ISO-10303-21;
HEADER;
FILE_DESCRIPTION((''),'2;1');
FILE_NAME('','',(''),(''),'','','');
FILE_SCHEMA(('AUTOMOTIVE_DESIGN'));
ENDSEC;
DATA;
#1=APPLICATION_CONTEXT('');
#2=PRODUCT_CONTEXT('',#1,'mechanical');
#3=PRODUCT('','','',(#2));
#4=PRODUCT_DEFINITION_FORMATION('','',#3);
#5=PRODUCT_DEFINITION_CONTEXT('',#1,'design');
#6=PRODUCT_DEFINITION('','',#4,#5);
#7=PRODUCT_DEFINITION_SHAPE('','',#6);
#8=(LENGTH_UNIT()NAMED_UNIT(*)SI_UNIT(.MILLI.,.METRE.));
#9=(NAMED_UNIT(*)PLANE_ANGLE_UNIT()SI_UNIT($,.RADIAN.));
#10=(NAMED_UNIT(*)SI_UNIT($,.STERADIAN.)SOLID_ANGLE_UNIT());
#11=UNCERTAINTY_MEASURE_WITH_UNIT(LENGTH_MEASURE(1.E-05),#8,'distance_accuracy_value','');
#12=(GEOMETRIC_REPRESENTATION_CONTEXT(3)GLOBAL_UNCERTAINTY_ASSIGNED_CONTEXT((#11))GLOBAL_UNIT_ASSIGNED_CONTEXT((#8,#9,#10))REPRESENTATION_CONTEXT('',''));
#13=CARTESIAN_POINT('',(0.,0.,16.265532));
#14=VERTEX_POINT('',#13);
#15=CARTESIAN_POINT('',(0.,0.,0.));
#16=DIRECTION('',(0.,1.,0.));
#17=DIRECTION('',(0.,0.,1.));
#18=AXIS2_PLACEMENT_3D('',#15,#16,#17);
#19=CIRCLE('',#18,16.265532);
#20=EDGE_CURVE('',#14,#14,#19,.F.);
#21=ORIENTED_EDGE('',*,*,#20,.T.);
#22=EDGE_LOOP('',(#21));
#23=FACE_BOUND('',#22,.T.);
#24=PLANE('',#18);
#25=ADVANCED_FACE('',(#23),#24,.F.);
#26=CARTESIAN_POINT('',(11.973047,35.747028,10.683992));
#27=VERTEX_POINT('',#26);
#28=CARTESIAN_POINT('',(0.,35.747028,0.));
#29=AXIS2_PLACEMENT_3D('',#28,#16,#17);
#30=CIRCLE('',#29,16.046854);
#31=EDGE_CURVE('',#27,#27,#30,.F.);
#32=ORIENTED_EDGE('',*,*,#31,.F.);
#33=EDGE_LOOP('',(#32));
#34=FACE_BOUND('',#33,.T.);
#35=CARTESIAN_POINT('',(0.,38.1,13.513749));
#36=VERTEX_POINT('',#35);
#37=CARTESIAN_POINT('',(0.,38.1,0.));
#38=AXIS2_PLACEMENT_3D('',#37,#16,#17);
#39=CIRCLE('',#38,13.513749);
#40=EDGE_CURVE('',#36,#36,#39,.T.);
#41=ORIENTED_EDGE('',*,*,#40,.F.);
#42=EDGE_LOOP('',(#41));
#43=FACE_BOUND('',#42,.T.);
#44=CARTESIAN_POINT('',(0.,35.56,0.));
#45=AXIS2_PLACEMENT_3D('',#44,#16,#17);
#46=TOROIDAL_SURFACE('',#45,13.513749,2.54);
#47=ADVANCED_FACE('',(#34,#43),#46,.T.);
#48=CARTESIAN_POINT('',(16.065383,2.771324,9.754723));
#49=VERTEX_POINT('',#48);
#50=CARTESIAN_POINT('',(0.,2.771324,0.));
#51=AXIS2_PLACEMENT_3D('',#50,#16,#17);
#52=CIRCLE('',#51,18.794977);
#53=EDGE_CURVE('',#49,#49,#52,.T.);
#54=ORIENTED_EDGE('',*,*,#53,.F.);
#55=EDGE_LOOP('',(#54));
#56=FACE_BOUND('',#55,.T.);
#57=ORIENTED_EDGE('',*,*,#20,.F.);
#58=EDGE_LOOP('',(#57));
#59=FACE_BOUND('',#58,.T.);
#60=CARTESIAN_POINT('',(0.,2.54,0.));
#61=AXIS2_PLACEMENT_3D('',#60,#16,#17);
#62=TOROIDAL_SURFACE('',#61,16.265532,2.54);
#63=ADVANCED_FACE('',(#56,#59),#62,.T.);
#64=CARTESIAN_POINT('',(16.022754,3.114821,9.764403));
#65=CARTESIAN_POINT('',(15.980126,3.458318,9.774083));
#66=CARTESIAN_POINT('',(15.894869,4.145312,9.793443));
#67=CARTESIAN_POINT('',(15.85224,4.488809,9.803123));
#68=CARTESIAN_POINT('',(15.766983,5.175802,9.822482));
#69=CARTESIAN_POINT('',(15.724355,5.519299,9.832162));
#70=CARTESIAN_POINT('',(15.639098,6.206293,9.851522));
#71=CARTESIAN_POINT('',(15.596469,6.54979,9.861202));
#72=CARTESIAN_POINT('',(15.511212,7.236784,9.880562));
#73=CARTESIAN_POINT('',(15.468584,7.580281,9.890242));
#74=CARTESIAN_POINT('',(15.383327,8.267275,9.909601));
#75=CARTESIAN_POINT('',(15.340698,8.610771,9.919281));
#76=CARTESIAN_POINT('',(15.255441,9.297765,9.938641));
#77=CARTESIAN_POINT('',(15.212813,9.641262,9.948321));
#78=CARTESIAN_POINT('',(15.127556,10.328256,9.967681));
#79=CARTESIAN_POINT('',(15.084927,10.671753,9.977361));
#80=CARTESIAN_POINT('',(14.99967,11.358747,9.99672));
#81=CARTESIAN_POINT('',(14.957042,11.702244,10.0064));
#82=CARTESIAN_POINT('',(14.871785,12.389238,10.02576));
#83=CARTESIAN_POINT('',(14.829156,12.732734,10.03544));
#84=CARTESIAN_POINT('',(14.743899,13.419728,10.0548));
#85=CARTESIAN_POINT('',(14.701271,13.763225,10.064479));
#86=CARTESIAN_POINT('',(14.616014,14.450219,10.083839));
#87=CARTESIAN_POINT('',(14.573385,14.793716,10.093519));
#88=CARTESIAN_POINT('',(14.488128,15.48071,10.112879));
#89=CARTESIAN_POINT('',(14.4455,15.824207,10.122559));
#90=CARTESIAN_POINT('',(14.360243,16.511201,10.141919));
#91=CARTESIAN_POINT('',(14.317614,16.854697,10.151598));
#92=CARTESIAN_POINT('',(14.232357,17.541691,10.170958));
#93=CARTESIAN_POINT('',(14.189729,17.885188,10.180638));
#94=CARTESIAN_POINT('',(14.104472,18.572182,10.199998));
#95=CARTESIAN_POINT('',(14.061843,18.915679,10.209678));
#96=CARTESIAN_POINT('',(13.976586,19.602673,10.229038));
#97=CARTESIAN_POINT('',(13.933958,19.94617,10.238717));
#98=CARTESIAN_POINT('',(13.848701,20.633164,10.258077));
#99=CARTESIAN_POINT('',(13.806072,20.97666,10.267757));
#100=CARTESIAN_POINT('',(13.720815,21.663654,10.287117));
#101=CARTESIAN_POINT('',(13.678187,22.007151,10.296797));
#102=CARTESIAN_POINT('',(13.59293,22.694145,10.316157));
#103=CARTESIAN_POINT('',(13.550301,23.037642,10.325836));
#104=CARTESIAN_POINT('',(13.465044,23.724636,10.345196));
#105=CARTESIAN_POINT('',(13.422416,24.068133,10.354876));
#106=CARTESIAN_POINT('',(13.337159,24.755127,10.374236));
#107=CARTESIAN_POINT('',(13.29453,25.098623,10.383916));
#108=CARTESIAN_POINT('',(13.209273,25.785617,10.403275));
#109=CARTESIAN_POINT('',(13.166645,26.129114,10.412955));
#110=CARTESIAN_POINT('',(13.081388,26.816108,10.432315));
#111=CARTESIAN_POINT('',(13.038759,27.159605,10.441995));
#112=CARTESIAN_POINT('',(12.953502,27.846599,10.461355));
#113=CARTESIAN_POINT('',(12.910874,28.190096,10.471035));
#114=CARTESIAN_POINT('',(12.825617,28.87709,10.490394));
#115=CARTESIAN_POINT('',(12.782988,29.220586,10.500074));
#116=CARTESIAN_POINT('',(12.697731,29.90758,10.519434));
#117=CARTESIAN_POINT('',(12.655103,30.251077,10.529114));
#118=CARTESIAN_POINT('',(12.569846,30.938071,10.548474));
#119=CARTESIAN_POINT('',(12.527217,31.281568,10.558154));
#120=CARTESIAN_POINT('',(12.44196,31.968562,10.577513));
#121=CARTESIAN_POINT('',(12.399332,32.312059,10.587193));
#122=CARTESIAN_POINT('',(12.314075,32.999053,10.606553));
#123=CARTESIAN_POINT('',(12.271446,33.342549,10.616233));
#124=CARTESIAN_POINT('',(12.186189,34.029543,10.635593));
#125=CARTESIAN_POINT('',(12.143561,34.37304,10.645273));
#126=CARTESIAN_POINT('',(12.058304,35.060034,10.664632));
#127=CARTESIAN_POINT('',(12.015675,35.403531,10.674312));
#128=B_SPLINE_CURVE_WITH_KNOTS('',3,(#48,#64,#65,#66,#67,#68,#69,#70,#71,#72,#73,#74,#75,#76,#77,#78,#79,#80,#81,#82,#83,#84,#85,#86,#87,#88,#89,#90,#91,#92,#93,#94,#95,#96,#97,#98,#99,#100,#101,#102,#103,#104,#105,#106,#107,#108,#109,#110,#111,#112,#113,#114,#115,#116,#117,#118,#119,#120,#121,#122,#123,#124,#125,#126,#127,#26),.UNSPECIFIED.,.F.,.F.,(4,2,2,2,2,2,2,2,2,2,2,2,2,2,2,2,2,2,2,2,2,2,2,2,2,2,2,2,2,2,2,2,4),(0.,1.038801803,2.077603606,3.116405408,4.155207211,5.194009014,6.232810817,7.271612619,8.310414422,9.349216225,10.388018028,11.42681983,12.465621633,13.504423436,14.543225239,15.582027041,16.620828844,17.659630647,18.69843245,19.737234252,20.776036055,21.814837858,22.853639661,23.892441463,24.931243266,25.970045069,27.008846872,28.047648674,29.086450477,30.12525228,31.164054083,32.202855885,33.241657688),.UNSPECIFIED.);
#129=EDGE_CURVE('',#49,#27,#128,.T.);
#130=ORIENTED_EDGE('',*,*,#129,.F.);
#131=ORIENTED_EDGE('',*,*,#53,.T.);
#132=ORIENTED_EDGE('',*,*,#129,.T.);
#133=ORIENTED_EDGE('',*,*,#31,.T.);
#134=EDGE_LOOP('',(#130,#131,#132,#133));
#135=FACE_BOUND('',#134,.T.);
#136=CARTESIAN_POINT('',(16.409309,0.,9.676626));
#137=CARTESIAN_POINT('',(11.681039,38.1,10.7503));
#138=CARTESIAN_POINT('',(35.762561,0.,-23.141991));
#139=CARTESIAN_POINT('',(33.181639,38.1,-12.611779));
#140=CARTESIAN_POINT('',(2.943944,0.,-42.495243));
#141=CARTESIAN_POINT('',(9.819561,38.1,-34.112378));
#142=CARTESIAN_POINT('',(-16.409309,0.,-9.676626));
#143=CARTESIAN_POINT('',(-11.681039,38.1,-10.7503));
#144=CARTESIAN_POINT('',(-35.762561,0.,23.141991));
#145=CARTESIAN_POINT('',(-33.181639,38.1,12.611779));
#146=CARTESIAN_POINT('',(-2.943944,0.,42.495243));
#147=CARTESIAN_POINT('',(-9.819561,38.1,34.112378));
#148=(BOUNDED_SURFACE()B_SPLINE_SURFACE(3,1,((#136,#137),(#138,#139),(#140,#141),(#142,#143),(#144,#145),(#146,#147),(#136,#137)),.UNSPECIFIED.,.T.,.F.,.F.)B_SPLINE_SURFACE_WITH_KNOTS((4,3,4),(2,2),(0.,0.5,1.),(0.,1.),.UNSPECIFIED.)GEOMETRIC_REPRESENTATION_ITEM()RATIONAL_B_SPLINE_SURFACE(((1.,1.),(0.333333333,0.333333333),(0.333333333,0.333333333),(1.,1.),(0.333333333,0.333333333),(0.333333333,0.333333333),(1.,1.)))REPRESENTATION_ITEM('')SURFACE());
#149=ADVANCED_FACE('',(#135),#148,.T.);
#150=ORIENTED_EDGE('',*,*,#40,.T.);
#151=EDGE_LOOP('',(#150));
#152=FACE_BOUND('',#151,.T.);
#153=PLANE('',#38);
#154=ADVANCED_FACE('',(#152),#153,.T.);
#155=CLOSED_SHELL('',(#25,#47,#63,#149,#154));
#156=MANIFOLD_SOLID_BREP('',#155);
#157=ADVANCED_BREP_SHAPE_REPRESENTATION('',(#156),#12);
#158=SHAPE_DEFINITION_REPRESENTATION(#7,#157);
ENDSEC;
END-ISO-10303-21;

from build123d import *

# Parameters (mm, degrees)
FILLET1_R = 2.54


with BuildPart() as part:
    # Loft1: read off the stored shape, not the designer's step
    # Loft1: loft between two sections, ruled curve by curve
    loft1_from = [
        Edge.make_bspline([(16.409308574, 0, 9.676626071), (35.762560715, 0, -23.141991078), (2.943943567, 0, -42.495243219), (-16.409308574, 0, -9.676626071), (-35.762560715, 0, 23.141991078), (-2.943943567, 0, 42.495243219), (16.409308574, 0, 9.676626071)], [0, 0, 0, 0, 0.5, 0.5, 0.5, 1, 1, 1, 1], 3, [1, 0.333333333, 0.333333333, 1, 0.333333333, 0.333333333, 1]),
    ]
    loft1_to = [
        Edge.make_bspline([(11.681039208, 38.1, 10.750299904), (33.181639016, 38.1, -12.611778512), (9.8195606, 38.1, -34.11237832), (-11.681039208, 38.1, -10.750299904), (-33.181639016, 38.1, 12.611778512), (-9.8195606, 38.1, 34.11237832), (11.681039208, 38.1, 10.750299904)], [0, 0, 0, 0, 0.5, 0.5, 0.5, 1, 1, 1, 1], 3, [1, 0.333333333, 0.333333333, 1, 0.333333333, 0.333333333, 1]),
    ]
    loft1 = Solid(Shell([*[Face.make_surface_from_curves(loft1_from[k], loft1_to[k]) for k in range(1)], Face(Wire(loft1_from)), Face(Wire(loft1_to))]))
    add(loft1)

    # Fillet1
    fillet1_edges = [part.edges().sort_by_distance(p)[0] for p in [
        (-11.681039208, 38.1, -10.750299904),
        (-16.409308574, 0, -9.676626071),
    ]]
    fillet(fillet1_edges, radius=FILLET1_R)


solid = part.part
